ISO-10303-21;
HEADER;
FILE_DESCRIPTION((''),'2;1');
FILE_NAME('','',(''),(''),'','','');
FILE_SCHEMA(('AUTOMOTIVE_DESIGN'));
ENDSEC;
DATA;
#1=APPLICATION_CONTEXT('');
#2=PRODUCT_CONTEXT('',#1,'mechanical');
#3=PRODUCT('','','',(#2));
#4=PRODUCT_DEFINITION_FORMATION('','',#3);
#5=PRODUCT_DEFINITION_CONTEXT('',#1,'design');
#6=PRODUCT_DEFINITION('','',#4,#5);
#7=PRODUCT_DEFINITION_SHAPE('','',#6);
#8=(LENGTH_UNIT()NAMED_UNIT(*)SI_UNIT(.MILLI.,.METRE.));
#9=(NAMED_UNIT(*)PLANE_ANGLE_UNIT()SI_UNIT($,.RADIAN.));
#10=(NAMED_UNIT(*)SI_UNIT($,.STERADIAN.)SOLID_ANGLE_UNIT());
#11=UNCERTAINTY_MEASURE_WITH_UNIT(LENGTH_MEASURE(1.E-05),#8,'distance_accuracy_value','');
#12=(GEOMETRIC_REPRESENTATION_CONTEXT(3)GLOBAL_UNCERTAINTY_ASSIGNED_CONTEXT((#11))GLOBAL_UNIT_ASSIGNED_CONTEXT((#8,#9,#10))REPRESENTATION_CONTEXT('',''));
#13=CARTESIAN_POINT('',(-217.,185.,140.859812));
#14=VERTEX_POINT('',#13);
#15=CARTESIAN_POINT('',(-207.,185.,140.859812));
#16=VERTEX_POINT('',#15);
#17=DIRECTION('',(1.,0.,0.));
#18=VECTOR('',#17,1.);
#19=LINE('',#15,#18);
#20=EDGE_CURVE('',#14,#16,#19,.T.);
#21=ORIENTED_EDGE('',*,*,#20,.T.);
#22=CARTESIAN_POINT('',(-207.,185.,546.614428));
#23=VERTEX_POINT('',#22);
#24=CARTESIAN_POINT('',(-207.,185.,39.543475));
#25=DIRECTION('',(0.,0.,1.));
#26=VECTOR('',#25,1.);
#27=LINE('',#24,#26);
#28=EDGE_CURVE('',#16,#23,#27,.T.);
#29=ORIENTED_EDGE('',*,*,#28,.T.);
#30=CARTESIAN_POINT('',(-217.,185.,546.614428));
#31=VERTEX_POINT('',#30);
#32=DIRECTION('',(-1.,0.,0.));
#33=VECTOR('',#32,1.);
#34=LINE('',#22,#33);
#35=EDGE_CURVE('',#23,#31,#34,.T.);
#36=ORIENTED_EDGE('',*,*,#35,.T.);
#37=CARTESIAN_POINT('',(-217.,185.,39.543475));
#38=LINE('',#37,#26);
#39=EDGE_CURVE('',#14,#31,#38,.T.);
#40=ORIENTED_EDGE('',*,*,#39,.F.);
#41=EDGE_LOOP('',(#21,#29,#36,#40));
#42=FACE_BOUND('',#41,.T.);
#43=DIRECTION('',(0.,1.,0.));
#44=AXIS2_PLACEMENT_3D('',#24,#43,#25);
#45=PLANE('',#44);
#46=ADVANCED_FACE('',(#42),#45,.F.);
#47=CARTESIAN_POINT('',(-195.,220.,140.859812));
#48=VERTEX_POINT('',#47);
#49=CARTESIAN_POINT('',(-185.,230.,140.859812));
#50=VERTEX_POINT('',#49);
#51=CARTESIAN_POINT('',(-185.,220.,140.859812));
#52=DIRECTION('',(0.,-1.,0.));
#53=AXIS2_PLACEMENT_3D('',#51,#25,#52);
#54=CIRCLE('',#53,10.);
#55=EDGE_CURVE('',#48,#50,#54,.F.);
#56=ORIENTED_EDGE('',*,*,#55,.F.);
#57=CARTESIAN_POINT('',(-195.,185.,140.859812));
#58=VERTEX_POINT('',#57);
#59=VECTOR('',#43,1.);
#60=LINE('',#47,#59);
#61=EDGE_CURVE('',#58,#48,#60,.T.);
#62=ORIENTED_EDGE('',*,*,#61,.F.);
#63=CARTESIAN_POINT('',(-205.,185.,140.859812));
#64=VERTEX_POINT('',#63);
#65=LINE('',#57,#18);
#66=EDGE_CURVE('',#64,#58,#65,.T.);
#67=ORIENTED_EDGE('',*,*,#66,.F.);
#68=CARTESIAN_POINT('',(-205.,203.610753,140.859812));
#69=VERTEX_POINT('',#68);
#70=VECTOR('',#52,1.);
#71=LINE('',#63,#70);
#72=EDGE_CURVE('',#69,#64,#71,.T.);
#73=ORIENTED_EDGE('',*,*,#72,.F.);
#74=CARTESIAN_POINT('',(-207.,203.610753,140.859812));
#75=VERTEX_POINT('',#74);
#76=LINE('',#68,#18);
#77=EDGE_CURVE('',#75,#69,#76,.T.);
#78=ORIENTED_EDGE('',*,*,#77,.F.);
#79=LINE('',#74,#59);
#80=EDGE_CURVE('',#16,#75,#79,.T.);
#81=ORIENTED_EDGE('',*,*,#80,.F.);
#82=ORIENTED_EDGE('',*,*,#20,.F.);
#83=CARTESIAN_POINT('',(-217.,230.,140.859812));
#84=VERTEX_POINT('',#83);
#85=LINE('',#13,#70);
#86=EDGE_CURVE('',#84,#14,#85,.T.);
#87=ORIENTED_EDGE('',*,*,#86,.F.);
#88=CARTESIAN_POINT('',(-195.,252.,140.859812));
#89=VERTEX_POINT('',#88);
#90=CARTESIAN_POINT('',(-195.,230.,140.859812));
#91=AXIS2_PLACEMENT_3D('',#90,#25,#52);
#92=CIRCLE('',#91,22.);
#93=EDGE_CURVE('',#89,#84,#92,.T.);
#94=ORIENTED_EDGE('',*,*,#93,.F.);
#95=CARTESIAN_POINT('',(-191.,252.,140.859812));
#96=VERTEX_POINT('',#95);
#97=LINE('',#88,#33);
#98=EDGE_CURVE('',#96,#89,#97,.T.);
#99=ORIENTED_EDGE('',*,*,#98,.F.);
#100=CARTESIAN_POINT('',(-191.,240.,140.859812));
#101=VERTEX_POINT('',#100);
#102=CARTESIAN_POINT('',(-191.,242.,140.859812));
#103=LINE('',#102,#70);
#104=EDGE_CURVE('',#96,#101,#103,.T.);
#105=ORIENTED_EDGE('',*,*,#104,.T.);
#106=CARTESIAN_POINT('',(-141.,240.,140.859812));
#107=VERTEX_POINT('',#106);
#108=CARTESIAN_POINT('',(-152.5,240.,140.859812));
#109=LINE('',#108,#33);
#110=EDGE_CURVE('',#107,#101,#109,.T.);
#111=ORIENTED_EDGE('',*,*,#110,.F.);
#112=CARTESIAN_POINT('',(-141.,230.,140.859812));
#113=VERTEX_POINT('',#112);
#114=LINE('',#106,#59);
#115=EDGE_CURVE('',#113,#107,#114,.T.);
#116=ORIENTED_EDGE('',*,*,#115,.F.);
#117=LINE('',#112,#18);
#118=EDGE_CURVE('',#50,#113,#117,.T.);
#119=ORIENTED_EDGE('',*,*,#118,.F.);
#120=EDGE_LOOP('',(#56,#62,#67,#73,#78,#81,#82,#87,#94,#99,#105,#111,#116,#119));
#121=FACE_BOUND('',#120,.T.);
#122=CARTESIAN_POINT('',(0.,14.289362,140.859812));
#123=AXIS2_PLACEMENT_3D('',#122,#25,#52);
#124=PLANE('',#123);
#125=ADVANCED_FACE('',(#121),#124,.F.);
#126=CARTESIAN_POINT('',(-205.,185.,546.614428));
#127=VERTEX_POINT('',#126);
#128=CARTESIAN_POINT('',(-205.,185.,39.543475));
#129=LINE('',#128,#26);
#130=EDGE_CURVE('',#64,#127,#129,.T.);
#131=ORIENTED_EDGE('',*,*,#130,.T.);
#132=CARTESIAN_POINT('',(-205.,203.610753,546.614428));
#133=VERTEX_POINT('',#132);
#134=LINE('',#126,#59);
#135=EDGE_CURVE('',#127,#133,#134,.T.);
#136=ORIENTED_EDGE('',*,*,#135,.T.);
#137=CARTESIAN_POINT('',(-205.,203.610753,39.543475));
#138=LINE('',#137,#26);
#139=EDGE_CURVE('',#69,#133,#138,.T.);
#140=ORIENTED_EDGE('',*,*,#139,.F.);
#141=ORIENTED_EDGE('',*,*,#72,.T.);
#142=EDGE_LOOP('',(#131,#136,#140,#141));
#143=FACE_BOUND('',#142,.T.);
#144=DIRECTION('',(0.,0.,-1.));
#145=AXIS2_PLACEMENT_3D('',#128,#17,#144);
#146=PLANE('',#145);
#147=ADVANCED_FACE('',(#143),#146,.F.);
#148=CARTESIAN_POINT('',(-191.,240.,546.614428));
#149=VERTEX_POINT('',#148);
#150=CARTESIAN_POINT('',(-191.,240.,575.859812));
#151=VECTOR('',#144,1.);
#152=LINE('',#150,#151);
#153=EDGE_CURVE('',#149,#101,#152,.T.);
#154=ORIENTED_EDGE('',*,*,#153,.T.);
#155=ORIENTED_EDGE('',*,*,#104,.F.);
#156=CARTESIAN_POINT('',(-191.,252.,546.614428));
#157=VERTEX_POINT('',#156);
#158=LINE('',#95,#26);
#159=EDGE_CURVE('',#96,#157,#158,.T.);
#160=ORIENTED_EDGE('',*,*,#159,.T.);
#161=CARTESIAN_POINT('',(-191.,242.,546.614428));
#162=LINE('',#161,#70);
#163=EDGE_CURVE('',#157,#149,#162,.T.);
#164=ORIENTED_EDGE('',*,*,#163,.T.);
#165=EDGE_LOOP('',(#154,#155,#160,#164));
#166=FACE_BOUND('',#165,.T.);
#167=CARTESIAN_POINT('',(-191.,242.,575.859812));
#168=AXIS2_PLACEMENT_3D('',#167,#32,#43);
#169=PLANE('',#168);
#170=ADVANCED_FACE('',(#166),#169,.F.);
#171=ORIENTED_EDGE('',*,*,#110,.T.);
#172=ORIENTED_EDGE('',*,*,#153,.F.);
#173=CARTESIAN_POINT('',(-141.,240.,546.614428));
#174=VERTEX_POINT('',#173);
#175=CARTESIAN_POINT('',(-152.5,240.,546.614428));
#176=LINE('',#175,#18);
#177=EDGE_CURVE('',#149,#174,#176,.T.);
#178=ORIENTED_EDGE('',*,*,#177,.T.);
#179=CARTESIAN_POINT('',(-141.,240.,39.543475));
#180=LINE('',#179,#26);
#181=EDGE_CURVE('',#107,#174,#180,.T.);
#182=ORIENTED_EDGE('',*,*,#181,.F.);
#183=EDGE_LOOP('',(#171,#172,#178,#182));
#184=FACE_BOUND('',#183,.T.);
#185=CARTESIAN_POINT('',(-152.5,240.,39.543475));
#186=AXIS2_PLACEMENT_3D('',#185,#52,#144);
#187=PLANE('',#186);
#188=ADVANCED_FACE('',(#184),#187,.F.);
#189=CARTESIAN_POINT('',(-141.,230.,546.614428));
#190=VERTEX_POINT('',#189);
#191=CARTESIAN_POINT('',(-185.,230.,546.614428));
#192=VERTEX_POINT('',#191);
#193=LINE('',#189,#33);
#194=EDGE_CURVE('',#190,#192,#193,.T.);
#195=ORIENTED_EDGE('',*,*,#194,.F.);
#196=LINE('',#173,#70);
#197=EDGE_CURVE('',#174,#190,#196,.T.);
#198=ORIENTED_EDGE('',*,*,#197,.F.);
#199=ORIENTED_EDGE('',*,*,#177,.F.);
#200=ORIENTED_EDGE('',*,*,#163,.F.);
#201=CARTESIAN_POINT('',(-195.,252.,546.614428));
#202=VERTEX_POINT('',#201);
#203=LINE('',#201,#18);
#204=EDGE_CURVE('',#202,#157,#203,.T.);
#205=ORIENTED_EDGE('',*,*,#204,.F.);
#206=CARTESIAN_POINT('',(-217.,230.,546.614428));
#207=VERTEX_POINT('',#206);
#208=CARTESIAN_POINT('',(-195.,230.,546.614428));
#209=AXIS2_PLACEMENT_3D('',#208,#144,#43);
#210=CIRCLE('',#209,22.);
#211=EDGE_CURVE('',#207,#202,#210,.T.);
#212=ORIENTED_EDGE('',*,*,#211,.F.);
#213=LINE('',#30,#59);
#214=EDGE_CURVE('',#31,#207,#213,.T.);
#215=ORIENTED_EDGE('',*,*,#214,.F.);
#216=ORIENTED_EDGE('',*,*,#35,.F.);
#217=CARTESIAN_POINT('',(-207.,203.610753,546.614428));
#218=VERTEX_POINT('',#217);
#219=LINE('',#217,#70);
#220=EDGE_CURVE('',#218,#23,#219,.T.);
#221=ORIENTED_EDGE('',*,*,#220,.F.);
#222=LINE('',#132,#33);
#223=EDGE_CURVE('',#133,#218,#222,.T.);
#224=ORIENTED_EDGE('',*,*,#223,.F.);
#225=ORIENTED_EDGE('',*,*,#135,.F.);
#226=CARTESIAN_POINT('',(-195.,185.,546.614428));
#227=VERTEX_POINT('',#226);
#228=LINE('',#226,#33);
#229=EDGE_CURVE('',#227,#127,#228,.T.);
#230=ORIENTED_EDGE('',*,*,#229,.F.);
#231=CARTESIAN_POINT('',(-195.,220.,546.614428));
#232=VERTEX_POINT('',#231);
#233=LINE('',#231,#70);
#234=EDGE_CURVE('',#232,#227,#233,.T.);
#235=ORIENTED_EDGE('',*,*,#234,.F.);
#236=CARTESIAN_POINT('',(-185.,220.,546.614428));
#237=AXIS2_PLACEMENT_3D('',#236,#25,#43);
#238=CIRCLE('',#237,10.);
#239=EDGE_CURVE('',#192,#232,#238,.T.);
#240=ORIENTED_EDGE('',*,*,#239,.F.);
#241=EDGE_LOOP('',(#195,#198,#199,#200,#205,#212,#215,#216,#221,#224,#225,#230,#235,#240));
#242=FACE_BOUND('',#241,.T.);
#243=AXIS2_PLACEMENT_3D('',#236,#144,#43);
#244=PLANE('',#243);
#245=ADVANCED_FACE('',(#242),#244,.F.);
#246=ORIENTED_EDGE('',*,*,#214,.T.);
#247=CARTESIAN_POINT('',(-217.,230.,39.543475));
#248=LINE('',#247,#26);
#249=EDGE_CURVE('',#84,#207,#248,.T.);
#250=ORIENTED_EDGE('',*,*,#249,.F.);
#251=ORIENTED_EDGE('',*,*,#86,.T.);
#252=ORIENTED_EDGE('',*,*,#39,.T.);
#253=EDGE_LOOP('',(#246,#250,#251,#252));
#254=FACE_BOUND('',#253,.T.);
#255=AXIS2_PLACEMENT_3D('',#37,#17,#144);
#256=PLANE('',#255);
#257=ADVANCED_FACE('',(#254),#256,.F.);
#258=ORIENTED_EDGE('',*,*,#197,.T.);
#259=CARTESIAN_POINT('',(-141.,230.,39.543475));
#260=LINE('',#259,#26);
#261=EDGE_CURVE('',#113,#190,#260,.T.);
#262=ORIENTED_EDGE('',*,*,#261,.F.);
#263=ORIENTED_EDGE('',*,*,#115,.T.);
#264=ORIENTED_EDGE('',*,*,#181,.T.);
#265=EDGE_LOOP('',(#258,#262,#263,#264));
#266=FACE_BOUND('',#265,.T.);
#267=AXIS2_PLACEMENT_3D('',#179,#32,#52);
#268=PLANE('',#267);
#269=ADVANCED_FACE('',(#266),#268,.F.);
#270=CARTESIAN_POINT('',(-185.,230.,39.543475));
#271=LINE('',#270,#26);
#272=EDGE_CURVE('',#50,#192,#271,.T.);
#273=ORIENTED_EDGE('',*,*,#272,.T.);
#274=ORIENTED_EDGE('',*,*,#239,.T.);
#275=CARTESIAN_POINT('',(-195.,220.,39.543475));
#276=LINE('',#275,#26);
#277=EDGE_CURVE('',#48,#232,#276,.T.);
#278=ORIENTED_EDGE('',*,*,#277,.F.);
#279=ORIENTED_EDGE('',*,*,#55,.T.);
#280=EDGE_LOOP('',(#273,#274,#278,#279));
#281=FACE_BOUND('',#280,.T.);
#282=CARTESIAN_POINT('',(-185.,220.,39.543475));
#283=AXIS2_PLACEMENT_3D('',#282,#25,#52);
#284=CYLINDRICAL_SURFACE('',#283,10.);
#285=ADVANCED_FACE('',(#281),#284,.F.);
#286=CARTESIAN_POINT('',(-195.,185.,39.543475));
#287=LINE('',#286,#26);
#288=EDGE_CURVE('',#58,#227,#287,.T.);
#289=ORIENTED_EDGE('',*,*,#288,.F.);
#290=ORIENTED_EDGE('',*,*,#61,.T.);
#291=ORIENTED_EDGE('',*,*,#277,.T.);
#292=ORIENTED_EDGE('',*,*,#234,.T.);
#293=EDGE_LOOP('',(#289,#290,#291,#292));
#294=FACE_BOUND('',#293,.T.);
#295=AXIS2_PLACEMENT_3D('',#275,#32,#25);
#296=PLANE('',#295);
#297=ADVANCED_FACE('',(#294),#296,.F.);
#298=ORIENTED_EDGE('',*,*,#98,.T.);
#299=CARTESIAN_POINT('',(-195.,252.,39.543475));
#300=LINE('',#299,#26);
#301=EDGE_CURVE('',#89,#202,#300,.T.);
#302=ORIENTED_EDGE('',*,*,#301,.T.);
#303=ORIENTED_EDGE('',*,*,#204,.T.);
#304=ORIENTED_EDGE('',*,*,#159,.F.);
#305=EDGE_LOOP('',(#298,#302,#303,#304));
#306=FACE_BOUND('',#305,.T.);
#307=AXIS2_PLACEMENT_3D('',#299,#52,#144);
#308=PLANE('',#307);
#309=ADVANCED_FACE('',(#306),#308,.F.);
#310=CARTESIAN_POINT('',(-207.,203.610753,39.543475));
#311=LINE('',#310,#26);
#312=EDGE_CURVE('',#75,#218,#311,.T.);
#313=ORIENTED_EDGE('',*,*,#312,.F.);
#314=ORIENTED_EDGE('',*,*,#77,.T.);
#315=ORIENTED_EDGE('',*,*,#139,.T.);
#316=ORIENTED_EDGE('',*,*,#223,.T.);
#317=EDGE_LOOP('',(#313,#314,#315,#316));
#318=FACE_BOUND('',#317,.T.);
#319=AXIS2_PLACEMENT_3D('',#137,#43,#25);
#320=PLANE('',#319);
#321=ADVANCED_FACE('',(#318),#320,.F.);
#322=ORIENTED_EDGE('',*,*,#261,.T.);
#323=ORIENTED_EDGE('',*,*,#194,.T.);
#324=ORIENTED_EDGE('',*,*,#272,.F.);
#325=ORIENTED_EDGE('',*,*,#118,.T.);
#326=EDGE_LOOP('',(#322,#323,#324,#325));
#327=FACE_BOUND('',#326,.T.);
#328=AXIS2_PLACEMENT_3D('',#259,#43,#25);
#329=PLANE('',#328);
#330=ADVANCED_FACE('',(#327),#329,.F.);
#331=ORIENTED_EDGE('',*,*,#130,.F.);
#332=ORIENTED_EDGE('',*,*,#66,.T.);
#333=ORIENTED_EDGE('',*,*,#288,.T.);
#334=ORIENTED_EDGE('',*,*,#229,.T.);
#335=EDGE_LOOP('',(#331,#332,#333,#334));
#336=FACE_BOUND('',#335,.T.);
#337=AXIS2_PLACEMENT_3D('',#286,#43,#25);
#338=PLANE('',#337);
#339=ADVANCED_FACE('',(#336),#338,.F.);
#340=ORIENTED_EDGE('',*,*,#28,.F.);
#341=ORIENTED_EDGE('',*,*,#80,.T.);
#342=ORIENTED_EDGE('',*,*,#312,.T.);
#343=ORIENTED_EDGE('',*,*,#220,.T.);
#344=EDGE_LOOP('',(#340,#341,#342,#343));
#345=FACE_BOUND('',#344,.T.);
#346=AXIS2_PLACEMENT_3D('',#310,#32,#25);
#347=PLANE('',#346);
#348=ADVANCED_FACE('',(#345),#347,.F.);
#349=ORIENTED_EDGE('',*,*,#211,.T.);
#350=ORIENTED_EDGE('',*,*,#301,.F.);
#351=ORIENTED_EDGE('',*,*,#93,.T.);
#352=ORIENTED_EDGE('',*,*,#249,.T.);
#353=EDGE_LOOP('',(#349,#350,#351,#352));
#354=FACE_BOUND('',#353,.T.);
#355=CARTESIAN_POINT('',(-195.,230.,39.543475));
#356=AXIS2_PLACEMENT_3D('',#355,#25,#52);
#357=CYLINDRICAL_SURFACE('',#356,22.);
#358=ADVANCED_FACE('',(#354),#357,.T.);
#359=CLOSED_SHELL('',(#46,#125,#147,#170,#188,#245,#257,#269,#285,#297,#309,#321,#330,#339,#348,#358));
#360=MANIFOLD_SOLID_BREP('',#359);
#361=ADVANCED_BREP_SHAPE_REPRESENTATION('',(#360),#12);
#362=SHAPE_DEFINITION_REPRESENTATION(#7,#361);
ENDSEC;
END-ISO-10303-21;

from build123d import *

# Parameters (mm, degrees)
BOSS_EXTRUDE1_DEPTH = 405.754616144
SKETCH2_W           = 405.754616144
SKETCH2_H           = 10
CUT_EXTRUDE1_DEPTH  = 11.5
CAVITY1_START       = 240
CAVITY1_OUTLINE_W   = 38.5
CAVITY1_OUTLINE_H   = 405.754616144
CAVITY1_DEPTH       = 2
SKETCH3_W           = 405.754616144
SKETCH3_H           = 10
CUT_EXTRUDE2_DEPTH  = 38.5


# Read off the part's stored shape, not the designer's step: Cavity1
with BuildPart() as part:
    # Sketch1 → Boss-Extrude1 (new body)
    with BuildSketch(Plane(origin=(0, 0, 546.614427926), x_dir=(-1, 0, 0), z_dir=(0, 0, -1))):
        with BuildLine():
            Line((141, 242), (152.5, 242))
            Line((152.5, 242), (152.5, 240))
            Line((152.5, 240), (141, 240))
            Line((141, 240), (141, 230))
            Line((141, 230), (185, 230))
            ThreePointArc((185, 230), (192.071067812, 227.071067812), (195, 220))
            Line((195, 220), (195, 185))
            Line((195, 185), (205, 185))
            Line((205, 185), (205, 203.610753203))
            Line((205, 203.610753203), (207, 203.610753203))
            Line((207, 203.610753203), (207, 185))
            Line((207, 185), (217, 185))
            Line((217, 185), (217, 230))
            ThreePointArc((217, 230), (210.556349186, 245.556349186), (195, 252))
            Line((195, 252), (141, 252))
            Line((141, 252), (141, 242))
        make_face()
    extrude(amount=BOSS_EXTRUDE1_DEPTH)

    # Sketch2 → Cut-Extrude1 (cut)
    with BuildSketch(Plane(origin=(-141, 0, 0), x_dir=(0, 0, -1), z_dir=(1, 0, 0))):
        with Locations((-343.737119854, 247)):
            Rectangle(SKETCH2_W, SKETCH2_H)
    extrude(amount=-CUT_EXTRUDE1_DEPTH, mode=Mode.SUBTRACT)

    # Cavity1 outline → Cavity1 (cut)
    with BuildSketch(Plane(origin=(0, 0, 0), x_dir=(1, 0, 0), z_dir=(0, 1, 0)).offset(CAVITY1_START)):
        with Locations((-171.75, -343.737119854)):
            Rectangle(CAVITY1_OUTLINE_W, CAVITY1_OUTLINE_H)
    extrude(amount=CAVITY1_DEPTH, mode=Mode.SUBTRACT)

    # Sketch3 → Cut-Extrude2 (cut)
    with BuildSketch(Plane(origin=(-152.5, 0, 0), x_dir=(0, 0, -1), z_dir=(1, 0, 0))):
        with Locations((-343.737119854, 247)):
            Rectangle(SKETCH3_W, SKETCH3_H)
    extrude(amount=-CUT_EXTRUDE2_DEPTH, mode=Mode.SUBTRACT)


solid = part.part
